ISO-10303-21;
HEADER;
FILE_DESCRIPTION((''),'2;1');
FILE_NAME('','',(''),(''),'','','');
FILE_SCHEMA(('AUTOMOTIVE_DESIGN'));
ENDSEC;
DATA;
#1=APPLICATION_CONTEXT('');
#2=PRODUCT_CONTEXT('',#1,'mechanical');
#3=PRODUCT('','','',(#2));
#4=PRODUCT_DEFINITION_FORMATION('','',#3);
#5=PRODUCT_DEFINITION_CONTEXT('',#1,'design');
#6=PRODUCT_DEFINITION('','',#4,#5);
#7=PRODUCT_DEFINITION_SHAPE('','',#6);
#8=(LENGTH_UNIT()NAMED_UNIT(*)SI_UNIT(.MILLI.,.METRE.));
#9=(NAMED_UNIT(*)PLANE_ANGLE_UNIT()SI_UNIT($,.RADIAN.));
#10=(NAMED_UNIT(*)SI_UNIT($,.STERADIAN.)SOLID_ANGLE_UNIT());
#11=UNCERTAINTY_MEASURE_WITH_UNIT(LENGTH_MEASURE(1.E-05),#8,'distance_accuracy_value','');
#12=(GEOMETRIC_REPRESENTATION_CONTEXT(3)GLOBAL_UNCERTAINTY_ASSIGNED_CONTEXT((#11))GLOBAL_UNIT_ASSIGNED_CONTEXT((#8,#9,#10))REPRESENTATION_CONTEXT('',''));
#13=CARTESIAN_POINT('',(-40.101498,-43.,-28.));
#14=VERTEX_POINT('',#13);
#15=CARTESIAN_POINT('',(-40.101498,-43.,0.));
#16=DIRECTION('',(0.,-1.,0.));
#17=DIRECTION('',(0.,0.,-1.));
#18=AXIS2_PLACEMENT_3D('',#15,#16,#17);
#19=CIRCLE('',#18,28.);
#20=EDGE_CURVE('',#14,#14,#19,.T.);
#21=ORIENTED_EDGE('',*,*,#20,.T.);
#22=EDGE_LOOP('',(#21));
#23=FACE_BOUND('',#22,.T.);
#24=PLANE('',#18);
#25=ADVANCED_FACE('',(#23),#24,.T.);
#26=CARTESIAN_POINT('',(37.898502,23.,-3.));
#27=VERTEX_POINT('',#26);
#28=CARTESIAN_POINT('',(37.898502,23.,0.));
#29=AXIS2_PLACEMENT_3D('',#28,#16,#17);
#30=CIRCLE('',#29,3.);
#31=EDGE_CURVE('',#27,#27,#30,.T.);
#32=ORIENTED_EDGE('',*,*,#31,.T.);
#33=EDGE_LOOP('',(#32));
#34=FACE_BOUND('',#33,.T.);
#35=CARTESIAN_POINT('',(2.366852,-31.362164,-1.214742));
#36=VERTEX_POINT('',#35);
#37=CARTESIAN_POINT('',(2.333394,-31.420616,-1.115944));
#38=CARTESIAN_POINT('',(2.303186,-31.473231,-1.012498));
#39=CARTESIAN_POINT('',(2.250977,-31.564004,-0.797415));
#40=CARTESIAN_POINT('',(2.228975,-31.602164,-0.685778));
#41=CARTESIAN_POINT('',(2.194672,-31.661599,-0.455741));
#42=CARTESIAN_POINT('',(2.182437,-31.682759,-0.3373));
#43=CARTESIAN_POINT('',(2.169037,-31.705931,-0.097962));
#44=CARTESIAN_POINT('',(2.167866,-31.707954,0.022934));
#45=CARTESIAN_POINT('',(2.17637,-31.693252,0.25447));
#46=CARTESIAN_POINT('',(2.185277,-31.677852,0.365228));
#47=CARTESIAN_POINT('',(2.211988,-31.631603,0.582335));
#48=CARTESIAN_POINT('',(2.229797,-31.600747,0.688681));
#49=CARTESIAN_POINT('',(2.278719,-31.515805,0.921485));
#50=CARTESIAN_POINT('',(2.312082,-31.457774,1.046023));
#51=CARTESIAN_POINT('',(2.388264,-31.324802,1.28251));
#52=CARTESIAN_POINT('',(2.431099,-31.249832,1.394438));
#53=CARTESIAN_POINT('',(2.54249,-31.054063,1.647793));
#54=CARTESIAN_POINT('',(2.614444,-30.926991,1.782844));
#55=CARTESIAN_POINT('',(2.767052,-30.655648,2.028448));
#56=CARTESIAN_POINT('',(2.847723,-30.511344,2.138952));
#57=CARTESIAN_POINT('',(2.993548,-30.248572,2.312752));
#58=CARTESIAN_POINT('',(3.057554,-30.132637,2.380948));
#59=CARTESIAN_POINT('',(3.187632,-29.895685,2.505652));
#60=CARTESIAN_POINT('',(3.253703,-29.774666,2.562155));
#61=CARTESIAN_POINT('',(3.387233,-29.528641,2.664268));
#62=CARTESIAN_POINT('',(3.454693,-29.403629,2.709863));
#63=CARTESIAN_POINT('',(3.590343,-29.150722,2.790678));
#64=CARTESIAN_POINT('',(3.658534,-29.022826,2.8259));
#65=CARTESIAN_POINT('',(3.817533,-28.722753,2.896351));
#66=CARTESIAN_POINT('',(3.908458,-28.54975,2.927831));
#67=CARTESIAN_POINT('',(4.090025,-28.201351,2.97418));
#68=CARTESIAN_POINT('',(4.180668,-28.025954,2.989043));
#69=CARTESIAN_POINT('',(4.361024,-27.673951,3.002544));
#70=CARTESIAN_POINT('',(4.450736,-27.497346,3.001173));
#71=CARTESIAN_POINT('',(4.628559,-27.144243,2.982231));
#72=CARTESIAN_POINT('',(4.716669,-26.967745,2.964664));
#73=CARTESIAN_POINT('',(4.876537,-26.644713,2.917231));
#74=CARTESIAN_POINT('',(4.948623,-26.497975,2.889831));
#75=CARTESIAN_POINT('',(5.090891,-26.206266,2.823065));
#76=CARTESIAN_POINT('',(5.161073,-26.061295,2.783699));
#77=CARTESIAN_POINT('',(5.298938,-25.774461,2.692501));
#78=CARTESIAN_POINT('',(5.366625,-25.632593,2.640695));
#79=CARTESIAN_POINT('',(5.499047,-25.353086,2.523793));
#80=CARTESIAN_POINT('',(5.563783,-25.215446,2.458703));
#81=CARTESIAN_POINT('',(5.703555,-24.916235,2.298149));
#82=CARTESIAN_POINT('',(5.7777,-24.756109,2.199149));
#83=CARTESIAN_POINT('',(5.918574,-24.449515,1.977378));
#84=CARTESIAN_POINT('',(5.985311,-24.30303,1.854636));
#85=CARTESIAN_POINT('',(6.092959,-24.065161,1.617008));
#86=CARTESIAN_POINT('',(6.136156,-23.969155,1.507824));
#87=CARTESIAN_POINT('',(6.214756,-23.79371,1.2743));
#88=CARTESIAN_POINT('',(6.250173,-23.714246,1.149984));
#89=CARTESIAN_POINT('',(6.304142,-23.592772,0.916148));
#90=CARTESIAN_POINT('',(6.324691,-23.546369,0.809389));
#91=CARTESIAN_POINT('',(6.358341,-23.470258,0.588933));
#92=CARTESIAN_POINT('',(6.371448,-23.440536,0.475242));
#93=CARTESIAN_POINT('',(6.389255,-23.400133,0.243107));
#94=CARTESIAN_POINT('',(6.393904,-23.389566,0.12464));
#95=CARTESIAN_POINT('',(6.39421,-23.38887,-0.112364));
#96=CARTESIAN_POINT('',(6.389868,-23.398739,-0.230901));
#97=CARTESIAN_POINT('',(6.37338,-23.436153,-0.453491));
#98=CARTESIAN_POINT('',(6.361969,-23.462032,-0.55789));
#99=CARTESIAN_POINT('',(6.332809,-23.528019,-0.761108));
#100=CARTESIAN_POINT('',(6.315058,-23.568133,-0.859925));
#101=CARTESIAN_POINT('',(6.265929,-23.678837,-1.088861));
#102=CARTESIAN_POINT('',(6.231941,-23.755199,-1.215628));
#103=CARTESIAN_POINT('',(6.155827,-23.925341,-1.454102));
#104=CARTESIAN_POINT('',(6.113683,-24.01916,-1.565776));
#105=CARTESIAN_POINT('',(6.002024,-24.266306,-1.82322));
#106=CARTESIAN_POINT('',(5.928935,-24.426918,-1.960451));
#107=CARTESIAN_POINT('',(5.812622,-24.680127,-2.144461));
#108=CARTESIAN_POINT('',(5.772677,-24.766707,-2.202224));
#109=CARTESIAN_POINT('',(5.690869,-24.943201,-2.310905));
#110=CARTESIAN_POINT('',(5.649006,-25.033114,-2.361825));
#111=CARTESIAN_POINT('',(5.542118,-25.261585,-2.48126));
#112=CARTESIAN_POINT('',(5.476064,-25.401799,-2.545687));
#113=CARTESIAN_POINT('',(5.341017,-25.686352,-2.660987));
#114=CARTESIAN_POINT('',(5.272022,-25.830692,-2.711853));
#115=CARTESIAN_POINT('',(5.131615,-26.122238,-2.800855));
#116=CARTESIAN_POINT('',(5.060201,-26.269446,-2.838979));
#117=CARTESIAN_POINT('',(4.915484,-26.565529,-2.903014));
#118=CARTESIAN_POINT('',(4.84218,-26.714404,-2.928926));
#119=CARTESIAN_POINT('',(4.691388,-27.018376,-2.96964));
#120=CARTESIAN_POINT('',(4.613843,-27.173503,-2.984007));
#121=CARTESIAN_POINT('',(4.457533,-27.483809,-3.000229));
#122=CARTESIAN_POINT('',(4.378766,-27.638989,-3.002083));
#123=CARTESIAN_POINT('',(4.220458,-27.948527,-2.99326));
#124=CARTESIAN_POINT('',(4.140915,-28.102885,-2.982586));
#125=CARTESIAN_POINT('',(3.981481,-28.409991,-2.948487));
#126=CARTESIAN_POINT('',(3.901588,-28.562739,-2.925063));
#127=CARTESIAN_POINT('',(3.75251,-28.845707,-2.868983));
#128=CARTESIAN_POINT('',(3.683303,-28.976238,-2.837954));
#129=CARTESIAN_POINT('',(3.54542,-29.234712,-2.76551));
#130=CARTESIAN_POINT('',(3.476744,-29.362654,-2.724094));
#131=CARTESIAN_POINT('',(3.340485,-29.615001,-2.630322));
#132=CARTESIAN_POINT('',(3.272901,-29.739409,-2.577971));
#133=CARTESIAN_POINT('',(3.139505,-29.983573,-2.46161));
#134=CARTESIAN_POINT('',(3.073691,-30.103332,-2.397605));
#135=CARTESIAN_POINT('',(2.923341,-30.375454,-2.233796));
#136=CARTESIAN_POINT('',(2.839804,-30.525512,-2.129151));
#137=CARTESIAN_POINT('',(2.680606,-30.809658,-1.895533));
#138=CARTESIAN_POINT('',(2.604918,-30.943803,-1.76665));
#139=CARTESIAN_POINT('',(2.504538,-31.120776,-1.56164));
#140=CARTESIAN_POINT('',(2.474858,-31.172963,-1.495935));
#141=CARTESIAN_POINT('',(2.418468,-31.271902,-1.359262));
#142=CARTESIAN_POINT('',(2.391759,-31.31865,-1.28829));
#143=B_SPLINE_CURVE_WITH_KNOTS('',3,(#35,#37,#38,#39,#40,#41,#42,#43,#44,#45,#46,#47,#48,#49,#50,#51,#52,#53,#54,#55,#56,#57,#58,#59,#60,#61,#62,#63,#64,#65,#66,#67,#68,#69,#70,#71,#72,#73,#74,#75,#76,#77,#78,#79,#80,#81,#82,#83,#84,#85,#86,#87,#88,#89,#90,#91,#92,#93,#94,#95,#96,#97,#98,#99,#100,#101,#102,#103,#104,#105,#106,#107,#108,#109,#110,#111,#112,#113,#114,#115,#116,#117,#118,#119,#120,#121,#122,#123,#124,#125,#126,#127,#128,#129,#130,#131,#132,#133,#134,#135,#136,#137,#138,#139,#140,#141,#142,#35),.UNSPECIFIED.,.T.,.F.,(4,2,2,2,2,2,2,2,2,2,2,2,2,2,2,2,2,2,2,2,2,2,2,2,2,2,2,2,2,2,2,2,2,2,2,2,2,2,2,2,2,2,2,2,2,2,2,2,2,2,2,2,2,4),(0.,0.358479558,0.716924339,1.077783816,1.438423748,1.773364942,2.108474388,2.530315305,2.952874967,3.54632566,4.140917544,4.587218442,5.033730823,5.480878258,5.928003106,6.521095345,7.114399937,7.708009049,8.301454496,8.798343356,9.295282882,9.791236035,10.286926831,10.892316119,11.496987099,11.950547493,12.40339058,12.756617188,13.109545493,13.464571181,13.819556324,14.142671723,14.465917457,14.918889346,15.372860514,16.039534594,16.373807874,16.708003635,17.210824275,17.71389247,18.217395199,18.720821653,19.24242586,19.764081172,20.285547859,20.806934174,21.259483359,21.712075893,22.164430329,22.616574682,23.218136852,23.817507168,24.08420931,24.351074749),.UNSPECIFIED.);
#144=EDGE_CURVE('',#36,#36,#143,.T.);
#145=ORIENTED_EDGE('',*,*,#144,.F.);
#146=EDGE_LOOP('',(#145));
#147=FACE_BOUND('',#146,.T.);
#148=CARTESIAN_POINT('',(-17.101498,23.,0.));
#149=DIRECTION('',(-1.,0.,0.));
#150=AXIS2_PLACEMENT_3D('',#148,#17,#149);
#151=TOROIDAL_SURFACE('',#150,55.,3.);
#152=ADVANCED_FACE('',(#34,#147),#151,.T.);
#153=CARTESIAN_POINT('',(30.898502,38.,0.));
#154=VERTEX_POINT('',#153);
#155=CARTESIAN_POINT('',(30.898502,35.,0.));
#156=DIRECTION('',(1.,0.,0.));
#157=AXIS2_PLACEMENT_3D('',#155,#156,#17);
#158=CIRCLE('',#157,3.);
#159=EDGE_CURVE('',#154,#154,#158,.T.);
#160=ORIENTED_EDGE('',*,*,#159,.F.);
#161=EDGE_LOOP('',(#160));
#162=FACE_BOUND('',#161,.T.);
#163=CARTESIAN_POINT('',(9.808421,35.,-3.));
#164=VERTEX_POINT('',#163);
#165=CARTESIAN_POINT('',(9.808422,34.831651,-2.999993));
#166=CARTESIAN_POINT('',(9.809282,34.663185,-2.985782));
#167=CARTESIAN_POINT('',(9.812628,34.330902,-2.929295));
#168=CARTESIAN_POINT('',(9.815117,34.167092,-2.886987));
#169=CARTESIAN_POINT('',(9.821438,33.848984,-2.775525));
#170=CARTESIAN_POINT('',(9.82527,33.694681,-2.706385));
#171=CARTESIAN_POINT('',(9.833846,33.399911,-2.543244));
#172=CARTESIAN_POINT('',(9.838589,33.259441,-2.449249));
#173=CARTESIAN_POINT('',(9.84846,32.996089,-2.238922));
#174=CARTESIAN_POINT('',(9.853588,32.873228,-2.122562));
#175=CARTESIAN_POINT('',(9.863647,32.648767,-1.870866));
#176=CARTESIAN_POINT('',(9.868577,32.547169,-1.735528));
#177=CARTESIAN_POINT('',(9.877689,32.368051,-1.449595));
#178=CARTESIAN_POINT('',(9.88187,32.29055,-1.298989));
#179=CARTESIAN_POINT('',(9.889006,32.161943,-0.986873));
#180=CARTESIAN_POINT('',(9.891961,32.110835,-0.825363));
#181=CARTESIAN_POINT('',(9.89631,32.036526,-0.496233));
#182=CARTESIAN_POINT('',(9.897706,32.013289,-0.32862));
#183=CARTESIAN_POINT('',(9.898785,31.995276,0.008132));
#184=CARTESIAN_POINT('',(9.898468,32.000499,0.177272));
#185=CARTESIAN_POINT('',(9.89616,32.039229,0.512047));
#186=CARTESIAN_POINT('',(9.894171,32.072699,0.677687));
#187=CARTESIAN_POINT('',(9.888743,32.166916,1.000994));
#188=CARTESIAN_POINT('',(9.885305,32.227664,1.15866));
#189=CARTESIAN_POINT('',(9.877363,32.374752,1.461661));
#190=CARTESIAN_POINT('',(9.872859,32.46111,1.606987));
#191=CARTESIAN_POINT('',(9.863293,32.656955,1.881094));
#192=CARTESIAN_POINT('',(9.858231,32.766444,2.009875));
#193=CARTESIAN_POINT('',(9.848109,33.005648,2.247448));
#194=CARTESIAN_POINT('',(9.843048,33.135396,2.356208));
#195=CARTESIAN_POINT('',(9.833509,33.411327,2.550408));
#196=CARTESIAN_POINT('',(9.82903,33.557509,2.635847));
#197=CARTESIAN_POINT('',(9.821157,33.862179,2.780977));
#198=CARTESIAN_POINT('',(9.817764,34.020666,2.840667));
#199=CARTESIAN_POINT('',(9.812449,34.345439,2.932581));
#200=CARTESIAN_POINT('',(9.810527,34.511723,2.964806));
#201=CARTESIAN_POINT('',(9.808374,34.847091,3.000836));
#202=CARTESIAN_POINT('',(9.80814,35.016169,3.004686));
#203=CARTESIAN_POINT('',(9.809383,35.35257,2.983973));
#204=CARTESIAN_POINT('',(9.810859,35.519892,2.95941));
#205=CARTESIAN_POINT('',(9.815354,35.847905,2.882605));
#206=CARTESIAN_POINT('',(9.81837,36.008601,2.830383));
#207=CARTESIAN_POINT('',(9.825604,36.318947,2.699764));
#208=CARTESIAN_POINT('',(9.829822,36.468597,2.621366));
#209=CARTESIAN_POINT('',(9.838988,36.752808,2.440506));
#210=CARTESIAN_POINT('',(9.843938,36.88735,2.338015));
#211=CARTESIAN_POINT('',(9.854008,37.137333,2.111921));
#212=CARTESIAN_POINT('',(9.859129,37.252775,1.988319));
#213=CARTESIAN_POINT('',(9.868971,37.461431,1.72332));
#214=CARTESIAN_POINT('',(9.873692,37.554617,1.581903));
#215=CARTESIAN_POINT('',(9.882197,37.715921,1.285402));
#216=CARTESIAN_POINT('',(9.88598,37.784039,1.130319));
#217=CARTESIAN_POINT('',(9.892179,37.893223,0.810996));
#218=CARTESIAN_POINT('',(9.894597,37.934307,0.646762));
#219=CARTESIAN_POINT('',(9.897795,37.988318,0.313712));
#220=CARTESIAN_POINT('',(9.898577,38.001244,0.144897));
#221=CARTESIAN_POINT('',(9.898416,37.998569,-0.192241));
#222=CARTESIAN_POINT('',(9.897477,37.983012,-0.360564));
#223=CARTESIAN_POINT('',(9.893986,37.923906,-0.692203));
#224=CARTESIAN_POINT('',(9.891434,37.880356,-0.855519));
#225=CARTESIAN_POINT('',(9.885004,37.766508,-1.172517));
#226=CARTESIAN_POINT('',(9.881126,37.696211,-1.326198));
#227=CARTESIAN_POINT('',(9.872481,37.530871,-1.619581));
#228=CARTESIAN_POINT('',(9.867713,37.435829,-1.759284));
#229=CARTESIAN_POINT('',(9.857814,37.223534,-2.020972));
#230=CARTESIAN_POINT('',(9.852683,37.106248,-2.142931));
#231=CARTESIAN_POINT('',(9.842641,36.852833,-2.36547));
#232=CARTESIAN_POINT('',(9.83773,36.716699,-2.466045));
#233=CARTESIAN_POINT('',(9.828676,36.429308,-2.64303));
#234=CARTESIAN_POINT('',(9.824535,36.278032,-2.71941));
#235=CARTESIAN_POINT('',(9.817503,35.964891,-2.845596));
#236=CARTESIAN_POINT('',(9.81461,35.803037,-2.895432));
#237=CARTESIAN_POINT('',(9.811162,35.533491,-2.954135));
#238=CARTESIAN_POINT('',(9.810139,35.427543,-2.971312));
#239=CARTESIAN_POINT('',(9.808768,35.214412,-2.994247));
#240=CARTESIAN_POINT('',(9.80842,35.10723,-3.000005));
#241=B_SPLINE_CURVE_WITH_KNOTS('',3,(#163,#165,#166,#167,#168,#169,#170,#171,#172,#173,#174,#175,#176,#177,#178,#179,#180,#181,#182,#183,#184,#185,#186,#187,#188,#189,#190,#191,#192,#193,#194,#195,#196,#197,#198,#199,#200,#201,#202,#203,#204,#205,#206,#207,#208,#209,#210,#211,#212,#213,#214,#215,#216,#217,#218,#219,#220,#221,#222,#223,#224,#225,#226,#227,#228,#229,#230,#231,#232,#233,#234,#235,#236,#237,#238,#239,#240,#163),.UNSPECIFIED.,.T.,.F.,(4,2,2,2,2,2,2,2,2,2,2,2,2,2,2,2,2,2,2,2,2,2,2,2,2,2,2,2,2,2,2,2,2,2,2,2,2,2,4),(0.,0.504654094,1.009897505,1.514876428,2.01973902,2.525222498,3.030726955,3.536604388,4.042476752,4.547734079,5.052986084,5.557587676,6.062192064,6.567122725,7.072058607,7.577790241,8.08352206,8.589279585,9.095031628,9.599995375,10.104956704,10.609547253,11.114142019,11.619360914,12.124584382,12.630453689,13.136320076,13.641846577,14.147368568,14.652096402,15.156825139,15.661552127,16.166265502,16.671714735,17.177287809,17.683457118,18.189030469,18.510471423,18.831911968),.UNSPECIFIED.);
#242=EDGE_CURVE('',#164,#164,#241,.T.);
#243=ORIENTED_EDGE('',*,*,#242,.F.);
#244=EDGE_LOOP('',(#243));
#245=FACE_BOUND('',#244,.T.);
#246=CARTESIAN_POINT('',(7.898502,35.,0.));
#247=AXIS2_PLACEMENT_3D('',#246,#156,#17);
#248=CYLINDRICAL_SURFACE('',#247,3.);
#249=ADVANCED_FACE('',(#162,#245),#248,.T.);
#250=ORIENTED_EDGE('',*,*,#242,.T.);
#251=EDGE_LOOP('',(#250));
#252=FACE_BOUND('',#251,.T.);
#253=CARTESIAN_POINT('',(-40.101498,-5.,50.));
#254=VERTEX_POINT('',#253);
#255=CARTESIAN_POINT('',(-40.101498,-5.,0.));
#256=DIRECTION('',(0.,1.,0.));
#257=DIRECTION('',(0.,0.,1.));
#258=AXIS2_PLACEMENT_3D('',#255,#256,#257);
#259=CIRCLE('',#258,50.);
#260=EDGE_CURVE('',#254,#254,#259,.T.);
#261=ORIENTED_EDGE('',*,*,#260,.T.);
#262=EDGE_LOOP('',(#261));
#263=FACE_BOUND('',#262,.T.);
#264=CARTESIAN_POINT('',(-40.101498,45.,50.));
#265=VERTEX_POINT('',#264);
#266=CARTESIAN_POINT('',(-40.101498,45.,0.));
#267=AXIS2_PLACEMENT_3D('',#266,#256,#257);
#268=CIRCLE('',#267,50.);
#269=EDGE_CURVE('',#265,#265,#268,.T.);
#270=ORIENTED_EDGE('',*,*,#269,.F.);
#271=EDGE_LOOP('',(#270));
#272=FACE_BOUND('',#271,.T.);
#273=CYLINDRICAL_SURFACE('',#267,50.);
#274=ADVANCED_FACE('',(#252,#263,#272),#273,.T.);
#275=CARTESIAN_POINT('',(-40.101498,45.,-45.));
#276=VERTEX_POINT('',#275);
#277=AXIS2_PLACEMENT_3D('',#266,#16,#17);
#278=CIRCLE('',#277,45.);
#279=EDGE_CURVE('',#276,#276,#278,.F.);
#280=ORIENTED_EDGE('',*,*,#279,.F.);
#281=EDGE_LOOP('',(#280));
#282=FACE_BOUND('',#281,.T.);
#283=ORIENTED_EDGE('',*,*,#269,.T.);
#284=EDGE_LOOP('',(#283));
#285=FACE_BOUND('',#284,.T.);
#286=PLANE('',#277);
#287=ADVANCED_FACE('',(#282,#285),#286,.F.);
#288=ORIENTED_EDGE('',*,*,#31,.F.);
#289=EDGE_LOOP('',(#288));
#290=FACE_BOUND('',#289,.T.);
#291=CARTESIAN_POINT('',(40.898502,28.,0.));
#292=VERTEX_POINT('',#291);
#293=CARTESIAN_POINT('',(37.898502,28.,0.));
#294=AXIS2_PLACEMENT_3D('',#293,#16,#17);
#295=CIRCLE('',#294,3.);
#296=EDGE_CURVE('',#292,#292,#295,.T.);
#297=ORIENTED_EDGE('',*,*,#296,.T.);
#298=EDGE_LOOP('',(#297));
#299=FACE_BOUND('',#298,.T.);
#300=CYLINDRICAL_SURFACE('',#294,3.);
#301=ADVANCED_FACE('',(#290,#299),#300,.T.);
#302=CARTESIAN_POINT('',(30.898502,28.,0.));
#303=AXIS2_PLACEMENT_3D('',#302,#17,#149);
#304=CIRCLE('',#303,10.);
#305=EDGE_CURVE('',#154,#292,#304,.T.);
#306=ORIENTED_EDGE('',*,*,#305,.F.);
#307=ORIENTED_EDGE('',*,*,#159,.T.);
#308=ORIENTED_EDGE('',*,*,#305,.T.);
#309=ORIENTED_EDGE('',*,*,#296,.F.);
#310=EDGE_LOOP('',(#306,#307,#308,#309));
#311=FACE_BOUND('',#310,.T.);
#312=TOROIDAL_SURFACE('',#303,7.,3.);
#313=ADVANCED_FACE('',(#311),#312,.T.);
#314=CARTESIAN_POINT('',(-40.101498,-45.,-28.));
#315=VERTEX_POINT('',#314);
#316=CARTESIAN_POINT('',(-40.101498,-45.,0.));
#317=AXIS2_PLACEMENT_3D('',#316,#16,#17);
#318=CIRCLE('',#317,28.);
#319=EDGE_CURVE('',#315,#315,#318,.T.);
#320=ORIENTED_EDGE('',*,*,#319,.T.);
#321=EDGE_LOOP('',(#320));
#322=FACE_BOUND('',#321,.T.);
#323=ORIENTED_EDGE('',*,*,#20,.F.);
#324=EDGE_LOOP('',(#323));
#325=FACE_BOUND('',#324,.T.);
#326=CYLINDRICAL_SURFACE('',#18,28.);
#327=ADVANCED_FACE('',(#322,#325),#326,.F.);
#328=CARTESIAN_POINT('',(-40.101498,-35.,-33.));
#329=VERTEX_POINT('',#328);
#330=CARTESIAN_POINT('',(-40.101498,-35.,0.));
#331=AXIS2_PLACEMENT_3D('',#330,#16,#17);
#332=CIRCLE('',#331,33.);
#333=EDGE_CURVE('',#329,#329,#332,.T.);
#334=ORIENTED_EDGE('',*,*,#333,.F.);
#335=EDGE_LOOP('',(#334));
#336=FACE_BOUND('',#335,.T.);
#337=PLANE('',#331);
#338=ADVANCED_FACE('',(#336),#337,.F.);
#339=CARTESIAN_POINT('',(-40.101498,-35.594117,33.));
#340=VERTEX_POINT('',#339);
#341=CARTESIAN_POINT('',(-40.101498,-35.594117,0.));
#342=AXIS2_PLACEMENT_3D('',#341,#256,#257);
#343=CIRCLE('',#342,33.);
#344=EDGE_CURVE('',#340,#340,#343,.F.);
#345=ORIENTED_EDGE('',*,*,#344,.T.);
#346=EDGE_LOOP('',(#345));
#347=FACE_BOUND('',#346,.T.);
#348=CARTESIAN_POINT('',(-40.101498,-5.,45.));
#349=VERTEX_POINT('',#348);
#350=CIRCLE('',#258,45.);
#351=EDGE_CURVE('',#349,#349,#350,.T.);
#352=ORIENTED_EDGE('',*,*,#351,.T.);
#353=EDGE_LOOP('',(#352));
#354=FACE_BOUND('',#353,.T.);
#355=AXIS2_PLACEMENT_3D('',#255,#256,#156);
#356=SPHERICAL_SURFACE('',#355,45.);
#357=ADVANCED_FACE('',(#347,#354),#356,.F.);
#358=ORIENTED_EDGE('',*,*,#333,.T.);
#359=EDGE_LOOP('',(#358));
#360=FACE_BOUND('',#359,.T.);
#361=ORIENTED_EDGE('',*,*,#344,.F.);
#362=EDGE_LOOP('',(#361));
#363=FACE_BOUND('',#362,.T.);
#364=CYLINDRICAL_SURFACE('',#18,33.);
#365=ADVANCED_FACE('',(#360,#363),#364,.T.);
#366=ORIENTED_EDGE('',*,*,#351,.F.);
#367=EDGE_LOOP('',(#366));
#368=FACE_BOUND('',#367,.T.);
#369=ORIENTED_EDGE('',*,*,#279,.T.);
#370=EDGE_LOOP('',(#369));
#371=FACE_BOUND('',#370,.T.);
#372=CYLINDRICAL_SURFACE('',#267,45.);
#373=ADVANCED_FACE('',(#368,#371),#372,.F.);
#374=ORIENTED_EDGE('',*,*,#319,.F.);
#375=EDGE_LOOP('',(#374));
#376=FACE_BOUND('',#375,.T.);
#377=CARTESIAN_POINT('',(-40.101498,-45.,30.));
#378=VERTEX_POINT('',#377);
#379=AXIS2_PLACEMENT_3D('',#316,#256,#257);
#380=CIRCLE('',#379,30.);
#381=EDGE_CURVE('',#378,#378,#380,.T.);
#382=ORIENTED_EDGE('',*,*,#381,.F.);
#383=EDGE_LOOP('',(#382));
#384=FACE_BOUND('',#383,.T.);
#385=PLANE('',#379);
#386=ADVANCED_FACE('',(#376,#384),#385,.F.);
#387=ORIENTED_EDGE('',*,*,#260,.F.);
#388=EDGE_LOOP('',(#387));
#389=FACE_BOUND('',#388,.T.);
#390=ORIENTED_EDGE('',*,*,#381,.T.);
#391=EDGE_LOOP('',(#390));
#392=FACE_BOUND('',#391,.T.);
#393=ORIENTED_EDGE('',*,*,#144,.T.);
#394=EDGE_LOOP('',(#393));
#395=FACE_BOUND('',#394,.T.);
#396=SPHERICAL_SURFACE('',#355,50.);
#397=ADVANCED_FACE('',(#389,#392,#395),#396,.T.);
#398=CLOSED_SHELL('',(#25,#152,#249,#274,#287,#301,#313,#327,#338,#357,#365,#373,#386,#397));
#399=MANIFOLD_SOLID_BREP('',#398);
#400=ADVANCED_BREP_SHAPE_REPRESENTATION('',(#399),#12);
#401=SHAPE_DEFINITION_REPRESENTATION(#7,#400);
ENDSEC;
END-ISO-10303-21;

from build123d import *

# Parameters (mm, degrees)
SKETCH11_R         = 3
SKETCH14_R         = 28
CUT_EXTRUDE1_DEPTH = 2


# Read off the part's stored shape, not the designer's step: Shell4
with BuildPart() as part:
    # Sketch2 → Revolve1 (revolve)
    with BuildSketch(Plane.XY, mode=Mode.PRIVATE) as revolve1_sk:
        with BuildLine():
            Line((-40.101497772, 45), (-40.101497772, -45))
            Line((-40.101497772, -45), (-10.101497772, -45))
            ThreePointArc((-10.101497772, -45), (4.619861778, -27.360679775), (9.898502228, -5))
            Line((9.898502228, -5), (9.898502228, 45))
            Line((9.898502228, 45), (-40.101497772, 45))
        make_face()
    revolve(revolve1_sk.sketch.rotate(Axis((-40.101497772, 45, 0), (0, -1, 0)), 90), axis=Axis((-40.101497772, 45, 0), (0, -1, 0)))

    # Sweep16: sweep along a path in Sketch3
    with BuildLine(Plane.XY) as sweep16_path:
        Line((7.898502228, 35), (30.898502228, 35))
        ThreePointArc((30.898502228, 35), (35.848249696, 32.949747468), (37.898502228, 28))
        Line((37.898502228, 28), (37.898502228, 23))
        ThreePointArc((37.898502228, 23), (27.703635862, -8.898275815), (0.898502228, -28.971145841))
    # Sketch11 → Sweep16 (sweep)
    with BuildSketch(Plane(origin=(7.898502228, 0, 0), x_dir=(0, 0, -1), z_dir=(1, 0, 0))):
        with Locations((0, 35)):
            Circle(SKETCH11_R)
    sweep(path=sweep16_path.line)

    # Sketch14 → Cut-Extrude1 (cut)
    with BuildSketch(Plane.XZ.offset(45)):
        with Locations(Location((-40.101497772, 0, 0), (0, 0, 270))):
            Circle(SKETCH14_R)
    extrude(amount=-CUT_EXTRUDE1_DEPTH, mode=Mode.SUBTRACT)

    # Shell4 outline → Shell4 (revolve, cut)
    with BuildSketch(Plane(origin=(-40.101497772, 0, 0), x_dir=(1, 0, 0), z_dir=(0, 0, 1))):
        with BuildLine():
            ThreePointArc((32.999999984, -35.594117098), (41.89272013, -21.431676729), (45, -4.999999985))
            Line((45, -4.999999985), (45, 45))
            Line((45, 45), (0, 45))
            Line((0, 45), (0, -35))
            Line((0, -35), (33, -35))
            Line((33, -35), (32.999999984, -35.594117098))
        make_face()
    revolve(axis=Axis((-40.101497772, 0, 0), (0, 1, 0)), mode=Mode.SUBTRACT)


solid = part.part
